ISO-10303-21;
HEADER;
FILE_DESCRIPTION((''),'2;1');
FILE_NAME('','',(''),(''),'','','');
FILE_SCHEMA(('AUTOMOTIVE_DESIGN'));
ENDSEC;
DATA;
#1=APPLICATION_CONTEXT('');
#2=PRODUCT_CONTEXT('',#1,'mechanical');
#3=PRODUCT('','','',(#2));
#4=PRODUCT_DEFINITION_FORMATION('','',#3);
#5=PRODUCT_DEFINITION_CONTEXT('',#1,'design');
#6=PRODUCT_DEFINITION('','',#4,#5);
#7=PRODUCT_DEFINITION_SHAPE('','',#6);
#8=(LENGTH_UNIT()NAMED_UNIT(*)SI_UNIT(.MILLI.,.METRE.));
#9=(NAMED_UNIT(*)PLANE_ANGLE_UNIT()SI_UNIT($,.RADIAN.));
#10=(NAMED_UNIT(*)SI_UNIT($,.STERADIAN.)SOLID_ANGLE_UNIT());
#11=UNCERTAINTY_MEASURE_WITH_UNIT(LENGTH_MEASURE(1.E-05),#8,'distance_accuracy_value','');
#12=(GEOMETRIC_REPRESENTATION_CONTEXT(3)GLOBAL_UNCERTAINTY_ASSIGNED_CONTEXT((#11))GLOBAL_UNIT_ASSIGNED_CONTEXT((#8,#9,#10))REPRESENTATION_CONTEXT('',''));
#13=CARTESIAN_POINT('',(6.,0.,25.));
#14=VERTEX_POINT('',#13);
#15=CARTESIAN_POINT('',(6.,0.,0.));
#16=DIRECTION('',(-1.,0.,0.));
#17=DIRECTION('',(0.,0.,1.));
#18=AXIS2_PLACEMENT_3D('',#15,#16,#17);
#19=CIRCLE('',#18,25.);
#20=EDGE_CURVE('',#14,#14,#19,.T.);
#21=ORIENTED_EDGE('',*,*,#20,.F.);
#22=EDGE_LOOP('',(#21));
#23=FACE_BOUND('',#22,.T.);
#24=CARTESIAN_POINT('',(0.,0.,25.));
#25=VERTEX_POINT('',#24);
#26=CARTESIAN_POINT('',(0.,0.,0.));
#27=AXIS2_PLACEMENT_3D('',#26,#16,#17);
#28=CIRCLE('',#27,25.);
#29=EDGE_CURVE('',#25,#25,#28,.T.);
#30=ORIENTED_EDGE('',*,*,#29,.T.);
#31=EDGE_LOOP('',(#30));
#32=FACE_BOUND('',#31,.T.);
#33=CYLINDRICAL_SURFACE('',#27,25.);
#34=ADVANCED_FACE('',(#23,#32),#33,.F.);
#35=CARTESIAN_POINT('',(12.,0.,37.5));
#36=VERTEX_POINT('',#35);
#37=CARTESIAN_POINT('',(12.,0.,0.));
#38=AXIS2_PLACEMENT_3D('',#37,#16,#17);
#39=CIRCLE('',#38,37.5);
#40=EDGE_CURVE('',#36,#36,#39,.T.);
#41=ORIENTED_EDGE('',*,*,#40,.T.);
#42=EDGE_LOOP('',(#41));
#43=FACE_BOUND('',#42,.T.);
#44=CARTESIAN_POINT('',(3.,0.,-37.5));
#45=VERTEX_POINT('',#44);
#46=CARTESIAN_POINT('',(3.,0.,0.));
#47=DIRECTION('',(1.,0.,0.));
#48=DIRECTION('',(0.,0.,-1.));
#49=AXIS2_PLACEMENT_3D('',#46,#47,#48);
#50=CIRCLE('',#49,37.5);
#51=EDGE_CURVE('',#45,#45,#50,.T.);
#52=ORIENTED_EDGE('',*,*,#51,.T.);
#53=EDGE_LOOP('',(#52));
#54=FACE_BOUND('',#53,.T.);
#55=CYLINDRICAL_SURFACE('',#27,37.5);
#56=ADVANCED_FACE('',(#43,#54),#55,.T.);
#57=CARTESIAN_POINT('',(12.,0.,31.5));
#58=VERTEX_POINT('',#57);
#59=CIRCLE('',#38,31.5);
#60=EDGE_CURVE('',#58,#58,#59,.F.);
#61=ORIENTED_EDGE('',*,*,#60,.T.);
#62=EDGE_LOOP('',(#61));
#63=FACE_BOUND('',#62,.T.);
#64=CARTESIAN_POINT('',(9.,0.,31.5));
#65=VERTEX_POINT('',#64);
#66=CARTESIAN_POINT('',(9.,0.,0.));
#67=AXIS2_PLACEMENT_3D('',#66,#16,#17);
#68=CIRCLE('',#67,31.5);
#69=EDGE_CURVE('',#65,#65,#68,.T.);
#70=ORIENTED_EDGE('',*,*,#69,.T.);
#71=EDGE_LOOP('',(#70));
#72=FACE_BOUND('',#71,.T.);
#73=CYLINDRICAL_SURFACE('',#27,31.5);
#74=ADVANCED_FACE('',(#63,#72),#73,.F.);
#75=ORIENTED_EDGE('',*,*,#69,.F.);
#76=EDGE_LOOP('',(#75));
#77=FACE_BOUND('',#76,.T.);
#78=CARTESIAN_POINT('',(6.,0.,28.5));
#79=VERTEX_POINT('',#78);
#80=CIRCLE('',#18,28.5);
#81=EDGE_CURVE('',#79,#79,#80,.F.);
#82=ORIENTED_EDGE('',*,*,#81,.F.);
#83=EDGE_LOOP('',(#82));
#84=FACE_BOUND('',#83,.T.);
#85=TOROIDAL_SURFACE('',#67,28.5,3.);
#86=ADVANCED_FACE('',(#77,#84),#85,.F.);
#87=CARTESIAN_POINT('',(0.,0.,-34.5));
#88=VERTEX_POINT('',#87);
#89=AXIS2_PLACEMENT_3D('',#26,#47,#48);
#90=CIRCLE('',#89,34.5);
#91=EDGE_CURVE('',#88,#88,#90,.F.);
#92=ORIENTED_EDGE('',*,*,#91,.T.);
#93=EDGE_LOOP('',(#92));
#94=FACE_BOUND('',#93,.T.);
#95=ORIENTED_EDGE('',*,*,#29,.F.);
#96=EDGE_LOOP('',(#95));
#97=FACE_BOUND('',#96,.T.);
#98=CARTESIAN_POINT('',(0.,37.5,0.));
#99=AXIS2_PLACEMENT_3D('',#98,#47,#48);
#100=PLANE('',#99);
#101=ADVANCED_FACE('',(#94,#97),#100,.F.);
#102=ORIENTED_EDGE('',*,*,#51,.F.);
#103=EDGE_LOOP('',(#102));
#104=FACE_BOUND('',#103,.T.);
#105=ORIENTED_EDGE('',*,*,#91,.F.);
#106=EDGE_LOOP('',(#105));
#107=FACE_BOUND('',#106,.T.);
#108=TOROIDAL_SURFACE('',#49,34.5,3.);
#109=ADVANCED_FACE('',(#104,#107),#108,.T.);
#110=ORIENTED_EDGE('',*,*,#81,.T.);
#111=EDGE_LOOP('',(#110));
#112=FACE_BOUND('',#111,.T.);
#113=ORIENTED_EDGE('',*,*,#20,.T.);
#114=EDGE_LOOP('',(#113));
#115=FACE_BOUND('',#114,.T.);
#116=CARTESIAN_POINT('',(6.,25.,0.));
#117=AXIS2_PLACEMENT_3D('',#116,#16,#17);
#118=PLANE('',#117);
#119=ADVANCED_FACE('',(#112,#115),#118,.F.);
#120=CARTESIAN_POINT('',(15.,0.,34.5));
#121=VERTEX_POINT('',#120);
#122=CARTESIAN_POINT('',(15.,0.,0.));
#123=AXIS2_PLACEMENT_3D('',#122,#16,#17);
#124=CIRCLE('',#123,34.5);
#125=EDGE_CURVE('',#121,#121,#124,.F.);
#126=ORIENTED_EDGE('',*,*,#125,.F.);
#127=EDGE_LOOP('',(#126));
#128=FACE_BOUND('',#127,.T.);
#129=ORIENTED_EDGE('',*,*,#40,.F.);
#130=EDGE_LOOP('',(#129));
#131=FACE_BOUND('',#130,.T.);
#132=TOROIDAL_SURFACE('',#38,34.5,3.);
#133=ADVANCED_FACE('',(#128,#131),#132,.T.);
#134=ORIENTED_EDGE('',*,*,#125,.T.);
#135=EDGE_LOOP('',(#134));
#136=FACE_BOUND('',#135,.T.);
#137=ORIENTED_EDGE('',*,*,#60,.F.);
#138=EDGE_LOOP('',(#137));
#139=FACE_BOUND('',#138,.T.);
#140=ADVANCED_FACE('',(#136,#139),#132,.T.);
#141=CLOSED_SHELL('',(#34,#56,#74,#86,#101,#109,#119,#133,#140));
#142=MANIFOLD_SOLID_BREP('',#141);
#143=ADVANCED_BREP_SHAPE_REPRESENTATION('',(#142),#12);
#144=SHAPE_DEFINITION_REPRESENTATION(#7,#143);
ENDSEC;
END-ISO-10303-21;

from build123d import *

# Parameters (mm, degrees)
FILLET1_R = 3
FILLET2_R = 3


with BuildPart() as part:
    # Sketch1 → Revolve1 (revolve)
    with BuildSketch(Plane.XY, mode=Mode.PRIVATE) as revolve1_sk:
        Polygon((15, 31.5), (15, 37.5), (0, 37.5), (0, 25), (6, 25), (6, 31.5), align=None)
    revolve(revolve1_sk.sketch.rotate(Axis((0, 0, 0), (1, 0, 0)), 90), axis=Axis((0, 0, 0), (1, 0, 0)))

    # Fillet1
    fillet1_edges = [part.edges().sort_by_distance(p)[0] for p in [
        (15, 0, -37.5),
        (15, 0, -31.5),
    ]]
    fillet(fillet1_edges, radius=FILLET1_R - 0.0001)  # a hair under: the kernel refuses the full size

    # Fillet2
    fillet2_edges = [part.edges().sort_by_distance(p)[0] for p in [
        (6, 0, -31.5),
        (0, 0, -37.5),
    ]]
    fillet(fillet2_edges, radius=FILLET2_R)


solid = part.part
